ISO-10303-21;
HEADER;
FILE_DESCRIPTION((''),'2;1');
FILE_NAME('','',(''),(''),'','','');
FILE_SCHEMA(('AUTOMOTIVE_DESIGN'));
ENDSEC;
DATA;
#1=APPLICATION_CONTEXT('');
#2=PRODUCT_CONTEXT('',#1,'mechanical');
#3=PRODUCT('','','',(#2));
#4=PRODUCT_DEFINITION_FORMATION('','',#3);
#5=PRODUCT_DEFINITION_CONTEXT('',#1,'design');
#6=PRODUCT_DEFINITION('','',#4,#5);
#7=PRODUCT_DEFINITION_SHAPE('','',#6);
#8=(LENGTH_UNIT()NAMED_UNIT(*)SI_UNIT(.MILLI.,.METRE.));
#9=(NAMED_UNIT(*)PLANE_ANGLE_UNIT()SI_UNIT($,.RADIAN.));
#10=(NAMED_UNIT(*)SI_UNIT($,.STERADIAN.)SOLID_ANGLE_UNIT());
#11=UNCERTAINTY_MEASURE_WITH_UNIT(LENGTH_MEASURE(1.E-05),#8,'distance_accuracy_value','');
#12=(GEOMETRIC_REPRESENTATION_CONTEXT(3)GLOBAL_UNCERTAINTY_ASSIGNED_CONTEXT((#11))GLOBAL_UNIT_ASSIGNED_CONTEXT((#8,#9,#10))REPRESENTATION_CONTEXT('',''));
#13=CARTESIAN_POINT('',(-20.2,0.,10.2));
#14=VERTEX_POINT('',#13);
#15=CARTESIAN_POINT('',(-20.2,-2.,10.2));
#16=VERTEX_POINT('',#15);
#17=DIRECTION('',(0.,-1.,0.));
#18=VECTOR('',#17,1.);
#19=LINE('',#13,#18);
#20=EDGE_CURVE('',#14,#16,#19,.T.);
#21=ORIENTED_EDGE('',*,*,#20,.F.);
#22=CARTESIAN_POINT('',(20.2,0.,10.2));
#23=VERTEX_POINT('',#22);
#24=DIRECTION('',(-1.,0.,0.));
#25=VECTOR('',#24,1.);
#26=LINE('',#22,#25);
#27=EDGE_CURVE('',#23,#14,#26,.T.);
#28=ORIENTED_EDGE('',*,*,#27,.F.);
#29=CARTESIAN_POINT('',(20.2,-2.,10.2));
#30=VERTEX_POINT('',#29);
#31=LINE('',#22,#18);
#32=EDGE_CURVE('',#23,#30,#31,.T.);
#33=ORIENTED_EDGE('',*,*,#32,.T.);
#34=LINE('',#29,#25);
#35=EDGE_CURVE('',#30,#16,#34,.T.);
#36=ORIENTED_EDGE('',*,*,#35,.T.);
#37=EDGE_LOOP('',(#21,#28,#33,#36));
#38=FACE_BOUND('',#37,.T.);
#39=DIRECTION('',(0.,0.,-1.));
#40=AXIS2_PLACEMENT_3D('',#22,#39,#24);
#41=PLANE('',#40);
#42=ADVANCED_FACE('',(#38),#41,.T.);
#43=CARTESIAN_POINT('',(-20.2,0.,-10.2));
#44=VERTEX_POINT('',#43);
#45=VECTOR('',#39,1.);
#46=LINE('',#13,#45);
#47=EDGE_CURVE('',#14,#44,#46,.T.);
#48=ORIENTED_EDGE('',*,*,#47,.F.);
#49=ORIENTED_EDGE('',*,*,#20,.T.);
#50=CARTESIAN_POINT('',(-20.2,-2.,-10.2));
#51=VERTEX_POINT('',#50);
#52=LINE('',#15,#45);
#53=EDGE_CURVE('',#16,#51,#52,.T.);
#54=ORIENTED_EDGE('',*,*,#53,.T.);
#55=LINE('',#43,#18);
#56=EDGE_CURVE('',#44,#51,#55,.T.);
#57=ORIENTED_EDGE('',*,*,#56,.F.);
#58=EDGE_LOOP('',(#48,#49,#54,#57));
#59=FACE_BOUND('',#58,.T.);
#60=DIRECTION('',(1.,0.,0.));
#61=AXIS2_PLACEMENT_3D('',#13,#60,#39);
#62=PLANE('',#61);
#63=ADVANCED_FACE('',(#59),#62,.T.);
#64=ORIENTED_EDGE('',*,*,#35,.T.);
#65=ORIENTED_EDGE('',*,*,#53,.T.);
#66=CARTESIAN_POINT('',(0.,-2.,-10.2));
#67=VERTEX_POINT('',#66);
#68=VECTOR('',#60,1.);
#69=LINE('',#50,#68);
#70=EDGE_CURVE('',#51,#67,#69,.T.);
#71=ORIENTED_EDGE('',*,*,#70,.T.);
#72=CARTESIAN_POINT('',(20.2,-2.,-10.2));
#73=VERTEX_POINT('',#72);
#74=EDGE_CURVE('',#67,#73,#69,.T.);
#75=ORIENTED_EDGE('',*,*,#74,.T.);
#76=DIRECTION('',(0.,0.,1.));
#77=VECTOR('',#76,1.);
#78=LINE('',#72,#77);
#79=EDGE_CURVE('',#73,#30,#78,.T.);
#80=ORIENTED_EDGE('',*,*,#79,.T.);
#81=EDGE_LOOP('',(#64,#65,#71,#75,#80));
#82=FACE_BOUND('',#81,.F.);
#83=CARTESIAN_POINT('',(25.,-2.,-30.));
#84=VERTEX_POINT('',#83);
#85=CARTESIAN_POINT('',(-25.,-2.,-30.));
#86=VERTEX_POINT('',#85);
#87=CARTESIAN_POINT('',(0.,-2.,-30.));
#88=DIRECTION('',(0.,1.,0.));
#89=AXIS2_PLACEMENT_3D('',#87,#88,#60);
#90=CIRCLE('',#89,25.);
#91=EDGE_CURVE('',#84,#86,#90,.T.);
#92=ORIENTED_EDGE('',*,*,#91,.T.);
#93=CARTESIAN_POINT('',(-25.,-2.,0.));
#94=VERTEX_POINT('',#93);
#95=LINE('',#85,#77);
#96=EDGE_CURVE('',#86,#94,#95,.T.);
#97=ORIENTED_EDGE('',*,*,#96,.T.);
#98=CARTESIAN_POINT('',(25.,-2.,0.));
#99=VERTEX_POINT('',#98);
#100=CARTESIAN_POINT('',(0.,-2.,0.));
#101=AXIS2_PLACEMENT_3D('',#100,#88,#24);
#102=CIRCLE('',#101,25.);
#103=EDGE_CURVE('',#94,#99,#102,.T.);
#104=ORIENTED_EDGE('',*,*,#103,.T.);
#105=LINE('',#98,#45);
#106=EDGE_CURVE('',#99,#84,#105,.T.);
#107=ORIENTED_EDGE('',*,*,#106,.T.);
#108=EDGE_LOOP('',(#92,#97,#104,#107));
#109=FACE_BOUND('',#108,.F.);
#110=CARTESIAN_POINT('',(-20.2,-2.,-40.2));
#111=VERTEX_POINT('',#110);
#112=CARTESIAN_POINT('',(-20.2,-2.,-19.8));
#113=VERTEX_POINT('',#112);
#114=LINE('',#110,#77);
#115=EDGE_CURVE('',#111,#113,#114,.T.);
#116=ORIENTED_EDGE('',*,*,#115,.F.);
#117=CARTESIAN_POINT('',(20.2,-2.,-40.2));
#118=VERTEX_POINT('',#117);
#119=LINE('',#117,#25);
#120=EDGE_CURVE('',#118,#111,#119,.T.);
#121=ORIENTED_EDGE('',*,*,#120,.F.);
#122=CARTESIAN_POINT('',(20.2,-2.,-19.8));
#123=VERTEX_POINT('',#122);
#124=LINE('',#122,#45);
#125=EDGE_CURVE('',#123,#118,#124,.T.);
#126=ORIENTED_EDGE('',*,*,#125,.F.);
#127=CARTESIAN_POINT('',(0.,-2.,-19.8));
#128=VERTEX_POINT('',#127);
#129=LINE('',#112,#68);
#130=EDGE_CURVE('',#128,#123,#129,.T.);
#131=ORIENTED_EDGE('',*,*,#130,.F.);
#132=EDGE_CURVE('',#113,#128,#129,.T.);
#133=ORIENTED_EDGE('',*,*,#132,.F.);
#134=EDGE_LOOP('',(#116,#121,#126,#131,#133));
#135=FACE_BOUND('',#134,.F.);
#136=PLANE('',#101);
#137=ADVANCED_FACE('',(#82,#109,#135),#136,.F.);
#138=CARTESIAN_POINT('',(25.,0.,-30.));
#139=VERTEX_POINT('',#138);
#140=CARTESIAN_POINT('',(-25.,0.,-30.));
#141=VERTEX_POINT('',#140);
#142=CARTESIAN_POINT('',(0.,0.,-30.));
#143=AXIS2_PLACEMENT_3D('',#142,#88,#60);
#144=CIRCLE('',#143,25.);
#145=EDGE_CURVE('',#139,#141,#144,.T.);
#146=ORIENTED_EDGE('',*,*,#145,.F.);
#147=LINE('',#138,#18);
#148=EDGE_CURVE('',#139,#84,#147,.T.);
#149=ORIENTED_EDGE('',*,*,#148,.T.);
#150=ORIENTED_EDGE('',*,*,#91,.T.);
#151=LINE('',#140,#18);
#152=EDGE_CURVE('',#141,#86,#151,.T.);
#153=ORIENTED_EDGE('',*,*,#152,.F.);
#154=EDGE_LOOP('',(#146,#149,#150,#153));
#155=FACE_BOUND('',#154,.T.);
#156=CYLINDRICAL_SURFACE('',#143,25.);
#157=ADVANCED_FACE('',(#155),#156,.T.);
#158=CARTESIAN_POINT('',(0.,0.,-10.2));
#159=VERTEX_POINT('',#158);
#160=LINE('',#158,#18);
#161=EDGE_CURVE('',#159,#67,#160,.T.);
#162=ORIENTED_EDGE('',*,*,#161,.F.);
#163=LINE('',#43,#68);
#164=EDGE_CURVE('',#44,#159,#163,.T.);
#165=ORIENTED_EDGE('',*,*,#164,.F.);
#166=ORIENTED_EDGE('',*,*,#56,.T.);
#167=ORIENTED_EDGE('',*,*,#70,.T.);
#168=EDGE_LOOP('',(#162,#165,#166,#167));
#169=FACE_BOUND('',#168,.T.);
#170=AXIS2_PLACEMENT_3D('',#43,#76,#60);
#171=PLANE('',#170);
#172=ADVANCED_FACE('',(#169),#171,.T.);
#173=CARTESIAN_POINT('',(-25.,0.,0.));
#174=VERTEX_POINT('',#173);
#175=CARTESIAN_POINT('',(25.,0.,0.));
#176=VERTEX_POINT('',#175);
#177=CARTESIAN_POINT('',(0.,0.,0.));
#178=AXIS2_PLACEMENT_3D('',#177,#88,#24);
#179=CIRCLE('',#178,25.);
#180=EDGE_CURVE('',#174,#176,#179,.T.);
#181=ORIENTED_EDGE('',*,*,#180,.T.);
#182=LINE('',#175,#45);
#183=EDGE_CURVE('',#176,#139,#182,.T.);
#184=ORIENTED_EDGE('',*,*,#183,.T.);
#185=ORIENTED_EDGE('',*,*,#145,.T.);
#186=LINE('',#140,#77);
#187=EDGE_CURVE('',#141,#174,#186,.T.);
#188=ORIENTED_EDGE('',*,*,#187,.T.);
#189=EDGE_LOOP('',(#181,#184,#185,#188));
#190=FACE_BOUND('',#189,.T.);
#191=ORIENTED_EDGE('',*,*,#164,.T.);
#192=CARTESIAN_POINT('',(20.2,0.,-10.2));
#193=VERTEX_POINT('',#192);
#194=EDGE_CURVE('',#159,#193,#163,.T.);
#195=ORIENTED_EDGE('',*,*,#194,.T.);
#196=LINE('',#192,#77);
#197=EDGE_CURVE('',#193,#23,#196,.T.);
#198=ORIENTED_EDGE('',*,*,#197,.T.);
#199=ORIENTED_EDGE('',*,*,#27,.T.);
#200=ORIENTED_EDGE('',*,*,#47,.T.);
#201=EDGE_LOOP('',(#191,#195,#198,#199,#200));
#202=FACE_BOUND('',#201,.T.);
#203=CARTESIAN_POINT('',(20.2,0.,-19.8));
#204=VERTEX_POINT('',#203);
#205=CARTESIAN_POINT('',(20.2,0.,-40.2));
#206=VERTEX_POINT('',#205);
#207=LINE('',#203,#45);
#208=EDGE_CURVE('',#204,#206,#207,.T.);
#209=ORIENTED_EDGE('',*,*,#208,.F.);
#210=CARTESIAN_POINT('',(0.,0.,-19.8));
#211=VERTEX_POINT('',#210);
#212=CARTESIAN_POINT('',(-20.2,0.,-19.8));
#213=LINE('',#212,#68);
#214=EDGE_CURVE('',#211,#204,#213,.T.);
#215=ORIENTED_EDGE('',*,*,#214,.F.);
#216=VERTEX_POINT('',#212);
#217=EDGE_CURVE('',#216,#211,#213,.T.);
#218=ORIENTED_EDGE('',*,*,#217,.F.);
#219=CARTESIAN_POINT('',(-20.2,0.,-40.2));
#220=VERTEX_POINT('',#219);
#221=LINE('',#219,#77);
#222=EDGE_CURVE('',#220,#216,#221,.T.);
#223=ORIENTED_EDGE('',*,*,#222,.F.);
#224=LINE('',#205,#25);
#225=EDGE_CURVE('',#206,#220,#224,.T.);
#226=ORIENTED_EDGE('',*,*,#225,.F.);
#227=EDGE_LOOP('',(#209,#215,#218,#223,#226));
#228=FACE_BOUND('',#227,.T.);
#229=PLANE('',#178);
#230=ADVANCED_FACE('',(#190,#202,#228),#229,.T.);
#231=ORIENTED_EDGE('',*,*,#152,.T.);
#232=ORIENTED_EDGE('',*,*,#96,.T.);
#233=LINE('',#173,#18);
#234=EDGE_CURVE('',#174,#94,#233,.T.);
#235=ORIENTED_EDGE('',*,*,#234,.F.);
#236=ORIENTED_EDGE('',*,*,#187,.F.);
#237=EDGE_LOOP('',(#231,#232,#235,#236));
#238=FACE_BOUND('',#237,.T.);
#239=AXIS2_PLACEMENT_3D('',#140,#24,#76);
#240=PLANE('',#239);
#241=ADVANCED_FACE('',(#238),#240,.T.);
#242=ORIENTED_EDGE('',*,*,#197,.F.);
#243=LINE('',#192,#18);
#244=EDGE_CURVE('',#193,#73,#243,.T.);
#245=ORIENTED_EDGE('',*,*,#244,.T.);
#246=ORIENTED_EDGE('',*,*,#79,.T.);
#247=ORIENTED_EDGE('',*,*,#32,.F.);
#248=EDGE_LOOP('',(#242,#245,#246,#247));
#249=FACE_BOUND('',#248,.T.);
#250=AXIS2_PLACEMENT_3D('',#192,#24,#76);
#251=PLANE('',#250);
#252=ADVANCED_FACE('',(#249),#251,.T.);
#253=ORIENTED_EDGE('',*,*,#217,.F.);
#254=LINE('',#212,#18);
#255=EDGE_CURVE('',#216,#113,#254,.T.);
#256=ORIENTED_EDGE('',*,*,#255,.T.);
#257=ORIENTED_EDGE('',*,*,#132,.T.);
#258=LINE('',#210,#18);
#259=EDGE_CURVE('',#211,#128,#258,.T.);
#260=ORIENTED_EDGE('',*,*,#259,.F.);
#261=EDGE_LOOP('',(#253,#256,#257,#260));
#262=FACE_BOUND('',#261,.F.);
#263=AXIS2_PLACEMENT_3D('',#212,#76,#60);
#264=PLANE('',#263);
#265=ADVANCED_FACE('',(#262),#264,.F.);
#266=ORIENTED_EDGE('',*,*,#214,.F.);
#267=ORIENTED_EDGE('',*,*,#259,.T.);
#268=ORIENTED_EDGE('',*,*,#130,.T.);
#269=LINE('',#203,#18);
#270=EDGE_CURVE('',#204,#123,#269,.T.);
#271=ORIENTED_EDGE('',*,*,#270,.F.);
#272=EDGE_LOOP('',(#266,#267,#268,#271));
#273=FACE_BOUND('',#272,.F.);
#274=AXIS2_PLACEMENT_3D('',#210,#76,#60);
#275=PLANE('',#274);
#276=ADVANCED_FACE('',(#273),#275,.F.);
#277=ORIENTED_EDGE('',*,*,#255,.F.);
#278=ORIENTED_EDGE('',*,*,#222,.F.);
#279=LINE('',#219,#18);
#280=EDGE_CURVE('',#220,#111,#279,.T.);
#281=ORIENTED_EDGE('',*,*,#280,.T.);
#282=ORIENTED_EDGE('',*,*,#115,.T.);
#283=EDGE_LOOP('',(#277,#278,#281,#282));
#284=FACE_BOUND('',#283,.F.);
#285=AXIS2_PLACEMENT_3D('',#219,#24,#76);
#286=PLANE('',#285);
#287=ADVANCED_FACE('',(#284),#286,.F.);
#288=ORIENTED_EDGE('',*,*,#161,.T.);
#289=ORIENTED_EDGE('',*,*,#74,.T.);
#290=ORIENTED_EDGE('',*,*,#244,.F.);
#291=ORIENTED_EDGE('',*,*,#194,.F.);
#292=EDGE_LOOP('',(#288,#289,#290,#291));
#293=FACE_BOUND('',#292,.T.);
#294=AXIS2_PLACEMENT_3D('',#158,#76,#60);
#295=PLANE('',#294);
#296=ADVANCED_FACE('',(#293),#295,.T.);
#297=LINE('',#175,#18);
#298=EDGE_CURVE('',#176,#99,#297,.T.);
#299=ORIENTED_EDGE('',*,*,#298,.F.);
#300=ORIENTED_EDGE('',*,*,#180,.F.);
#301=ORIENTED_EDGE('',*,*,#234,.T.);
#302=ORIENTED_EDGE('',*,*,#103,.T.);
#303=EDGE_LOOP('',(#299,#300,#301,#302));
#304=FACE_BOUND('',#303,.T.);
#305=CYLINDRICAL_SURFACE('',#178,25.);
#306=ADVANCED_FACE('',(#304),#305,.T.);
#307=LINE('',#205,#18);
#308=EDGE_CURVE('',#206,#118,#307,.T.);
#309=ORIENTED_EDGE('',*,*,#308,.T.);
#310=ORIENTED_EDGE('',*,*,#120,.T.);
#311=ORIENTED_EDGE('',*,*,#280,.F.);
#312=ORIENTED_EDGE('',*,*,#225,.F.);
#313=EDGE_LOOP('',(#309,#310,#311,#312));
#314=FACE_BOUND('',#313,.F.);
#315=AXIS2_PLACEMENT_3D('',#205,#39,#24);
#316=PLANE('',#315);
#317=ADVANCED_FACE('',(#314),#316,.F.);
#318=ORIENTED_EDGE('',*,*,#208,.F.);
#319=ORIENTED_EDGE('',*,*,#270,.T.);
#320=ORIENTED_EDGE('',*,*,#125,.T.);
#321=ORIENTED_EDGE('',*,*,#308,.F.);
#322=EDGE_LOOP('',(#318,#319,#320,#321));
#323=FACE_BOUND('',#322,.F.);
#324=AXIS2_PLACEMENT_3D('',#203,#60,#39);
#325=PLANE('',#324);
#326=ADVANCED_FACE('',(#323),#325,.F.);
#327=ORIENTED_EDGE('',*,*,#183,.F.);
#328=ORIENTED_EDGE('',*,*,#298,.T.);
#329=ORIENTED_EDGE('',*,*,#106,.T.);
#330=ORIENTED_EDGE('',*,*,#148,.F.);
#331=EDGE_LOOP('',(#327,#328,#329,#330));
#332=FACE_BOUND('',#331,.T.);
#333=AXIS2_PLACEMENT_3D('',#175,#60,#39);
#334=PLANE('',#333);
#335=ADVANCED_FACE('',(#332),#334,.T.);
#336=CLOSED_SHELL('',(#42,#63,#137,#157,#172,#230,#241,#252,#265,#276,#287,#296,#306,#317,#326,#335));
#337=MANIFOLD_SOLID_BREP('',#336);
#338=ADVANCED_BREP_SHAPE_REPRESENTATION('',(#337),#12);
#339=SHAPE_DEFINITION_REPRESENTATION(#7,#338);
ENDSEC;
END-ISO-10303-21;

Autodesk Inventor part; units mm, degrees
ref_plane "YZ Plane" through (0, 0, 0) normal (1, 0, 0) x (0, 1, 0)
ref_plane "XZ Plane" through (0, 0, 0) normal (0, 1, 0) x (-1, 0, 0)
ref_plane "XY Plane" through (0, 0, 0) normal (0, 0, 1) x (1, 0, 0)
sketch "Szkic1" plane through (0, 0, 0) normal (0, 1, 0) x (-1, 0, 0)
  line L0 (0, 0) -> (0, -30)
  circle A0 centre (0, 0) radius 2
  circle A1 centre (0, -30) radius 2
  line L1 (0, 0) -> (0, -30) construction
  line L2 (-25, 0) -> (-25, -30)
  line L3 (25, -30) -> (25, 0)
  arc A2 (25, 0) -> (-25, 0) centre (0, 0) ccw
  arc A3 (-25, -30) -> (25, -30) centre (0, -30) ccw
  line L4 (-20.2, -40.2) -> (20.2, -40.2)
  line L5 (20.2, -40.2) -> (20.2, -19.8)
  line L6 (20.2, -19.8) -> (-20.2, -19.8)
  line L7 (-20.2, -19.8) -> (-20.2, -40.2)
  line L8 (-20.2, -40.2) -> (20.2, -19.8) construction
  line L9 (20.2, -40.2) -> (-20.2, -19.8) construction
  line L10 (0, -15) -> (-25, -15) construction
  line L11 (0, -30) -> (0, 0)
  circle A4 centre (0, 0) radius 2
  line L12 (0, -30) -> (0, 0) construction
  line L13 (-20.2, 10.2) -> (20.2, 10.2)
  line L14 (20.2, 10.2) -> (20.2, -10.2)
  line L15 (20.2, -10.2) -> (-20.2, -10.2)
  line L16 (-20.2, 10.2) -> (20.2, -10.2) construction
  line L17 (20.2, 10.2) -> (-20.2, -10.2) construction
  line L18 (-20.2, -10.2) -> (-20.2, 10.2)
  line L19 (0, -15) -> (-400, -15) construction
  line L20 (0, -15) -> (400, -15) construction
  dimension "d0" = 30
  dimension "d1" = 4
  dimension "d2" = 4
  dimension "d3" = 50
  dimension "d6" = 40.4
  dimension "d7" = 20.4
  dimension "d8" = 400
  dimension "d9" = 180
extrude "Wyciągnięcie proste1" add sketch "Szkic1" against normal blind 2 contours A2 L3 A3 L2
properties part number "base"
